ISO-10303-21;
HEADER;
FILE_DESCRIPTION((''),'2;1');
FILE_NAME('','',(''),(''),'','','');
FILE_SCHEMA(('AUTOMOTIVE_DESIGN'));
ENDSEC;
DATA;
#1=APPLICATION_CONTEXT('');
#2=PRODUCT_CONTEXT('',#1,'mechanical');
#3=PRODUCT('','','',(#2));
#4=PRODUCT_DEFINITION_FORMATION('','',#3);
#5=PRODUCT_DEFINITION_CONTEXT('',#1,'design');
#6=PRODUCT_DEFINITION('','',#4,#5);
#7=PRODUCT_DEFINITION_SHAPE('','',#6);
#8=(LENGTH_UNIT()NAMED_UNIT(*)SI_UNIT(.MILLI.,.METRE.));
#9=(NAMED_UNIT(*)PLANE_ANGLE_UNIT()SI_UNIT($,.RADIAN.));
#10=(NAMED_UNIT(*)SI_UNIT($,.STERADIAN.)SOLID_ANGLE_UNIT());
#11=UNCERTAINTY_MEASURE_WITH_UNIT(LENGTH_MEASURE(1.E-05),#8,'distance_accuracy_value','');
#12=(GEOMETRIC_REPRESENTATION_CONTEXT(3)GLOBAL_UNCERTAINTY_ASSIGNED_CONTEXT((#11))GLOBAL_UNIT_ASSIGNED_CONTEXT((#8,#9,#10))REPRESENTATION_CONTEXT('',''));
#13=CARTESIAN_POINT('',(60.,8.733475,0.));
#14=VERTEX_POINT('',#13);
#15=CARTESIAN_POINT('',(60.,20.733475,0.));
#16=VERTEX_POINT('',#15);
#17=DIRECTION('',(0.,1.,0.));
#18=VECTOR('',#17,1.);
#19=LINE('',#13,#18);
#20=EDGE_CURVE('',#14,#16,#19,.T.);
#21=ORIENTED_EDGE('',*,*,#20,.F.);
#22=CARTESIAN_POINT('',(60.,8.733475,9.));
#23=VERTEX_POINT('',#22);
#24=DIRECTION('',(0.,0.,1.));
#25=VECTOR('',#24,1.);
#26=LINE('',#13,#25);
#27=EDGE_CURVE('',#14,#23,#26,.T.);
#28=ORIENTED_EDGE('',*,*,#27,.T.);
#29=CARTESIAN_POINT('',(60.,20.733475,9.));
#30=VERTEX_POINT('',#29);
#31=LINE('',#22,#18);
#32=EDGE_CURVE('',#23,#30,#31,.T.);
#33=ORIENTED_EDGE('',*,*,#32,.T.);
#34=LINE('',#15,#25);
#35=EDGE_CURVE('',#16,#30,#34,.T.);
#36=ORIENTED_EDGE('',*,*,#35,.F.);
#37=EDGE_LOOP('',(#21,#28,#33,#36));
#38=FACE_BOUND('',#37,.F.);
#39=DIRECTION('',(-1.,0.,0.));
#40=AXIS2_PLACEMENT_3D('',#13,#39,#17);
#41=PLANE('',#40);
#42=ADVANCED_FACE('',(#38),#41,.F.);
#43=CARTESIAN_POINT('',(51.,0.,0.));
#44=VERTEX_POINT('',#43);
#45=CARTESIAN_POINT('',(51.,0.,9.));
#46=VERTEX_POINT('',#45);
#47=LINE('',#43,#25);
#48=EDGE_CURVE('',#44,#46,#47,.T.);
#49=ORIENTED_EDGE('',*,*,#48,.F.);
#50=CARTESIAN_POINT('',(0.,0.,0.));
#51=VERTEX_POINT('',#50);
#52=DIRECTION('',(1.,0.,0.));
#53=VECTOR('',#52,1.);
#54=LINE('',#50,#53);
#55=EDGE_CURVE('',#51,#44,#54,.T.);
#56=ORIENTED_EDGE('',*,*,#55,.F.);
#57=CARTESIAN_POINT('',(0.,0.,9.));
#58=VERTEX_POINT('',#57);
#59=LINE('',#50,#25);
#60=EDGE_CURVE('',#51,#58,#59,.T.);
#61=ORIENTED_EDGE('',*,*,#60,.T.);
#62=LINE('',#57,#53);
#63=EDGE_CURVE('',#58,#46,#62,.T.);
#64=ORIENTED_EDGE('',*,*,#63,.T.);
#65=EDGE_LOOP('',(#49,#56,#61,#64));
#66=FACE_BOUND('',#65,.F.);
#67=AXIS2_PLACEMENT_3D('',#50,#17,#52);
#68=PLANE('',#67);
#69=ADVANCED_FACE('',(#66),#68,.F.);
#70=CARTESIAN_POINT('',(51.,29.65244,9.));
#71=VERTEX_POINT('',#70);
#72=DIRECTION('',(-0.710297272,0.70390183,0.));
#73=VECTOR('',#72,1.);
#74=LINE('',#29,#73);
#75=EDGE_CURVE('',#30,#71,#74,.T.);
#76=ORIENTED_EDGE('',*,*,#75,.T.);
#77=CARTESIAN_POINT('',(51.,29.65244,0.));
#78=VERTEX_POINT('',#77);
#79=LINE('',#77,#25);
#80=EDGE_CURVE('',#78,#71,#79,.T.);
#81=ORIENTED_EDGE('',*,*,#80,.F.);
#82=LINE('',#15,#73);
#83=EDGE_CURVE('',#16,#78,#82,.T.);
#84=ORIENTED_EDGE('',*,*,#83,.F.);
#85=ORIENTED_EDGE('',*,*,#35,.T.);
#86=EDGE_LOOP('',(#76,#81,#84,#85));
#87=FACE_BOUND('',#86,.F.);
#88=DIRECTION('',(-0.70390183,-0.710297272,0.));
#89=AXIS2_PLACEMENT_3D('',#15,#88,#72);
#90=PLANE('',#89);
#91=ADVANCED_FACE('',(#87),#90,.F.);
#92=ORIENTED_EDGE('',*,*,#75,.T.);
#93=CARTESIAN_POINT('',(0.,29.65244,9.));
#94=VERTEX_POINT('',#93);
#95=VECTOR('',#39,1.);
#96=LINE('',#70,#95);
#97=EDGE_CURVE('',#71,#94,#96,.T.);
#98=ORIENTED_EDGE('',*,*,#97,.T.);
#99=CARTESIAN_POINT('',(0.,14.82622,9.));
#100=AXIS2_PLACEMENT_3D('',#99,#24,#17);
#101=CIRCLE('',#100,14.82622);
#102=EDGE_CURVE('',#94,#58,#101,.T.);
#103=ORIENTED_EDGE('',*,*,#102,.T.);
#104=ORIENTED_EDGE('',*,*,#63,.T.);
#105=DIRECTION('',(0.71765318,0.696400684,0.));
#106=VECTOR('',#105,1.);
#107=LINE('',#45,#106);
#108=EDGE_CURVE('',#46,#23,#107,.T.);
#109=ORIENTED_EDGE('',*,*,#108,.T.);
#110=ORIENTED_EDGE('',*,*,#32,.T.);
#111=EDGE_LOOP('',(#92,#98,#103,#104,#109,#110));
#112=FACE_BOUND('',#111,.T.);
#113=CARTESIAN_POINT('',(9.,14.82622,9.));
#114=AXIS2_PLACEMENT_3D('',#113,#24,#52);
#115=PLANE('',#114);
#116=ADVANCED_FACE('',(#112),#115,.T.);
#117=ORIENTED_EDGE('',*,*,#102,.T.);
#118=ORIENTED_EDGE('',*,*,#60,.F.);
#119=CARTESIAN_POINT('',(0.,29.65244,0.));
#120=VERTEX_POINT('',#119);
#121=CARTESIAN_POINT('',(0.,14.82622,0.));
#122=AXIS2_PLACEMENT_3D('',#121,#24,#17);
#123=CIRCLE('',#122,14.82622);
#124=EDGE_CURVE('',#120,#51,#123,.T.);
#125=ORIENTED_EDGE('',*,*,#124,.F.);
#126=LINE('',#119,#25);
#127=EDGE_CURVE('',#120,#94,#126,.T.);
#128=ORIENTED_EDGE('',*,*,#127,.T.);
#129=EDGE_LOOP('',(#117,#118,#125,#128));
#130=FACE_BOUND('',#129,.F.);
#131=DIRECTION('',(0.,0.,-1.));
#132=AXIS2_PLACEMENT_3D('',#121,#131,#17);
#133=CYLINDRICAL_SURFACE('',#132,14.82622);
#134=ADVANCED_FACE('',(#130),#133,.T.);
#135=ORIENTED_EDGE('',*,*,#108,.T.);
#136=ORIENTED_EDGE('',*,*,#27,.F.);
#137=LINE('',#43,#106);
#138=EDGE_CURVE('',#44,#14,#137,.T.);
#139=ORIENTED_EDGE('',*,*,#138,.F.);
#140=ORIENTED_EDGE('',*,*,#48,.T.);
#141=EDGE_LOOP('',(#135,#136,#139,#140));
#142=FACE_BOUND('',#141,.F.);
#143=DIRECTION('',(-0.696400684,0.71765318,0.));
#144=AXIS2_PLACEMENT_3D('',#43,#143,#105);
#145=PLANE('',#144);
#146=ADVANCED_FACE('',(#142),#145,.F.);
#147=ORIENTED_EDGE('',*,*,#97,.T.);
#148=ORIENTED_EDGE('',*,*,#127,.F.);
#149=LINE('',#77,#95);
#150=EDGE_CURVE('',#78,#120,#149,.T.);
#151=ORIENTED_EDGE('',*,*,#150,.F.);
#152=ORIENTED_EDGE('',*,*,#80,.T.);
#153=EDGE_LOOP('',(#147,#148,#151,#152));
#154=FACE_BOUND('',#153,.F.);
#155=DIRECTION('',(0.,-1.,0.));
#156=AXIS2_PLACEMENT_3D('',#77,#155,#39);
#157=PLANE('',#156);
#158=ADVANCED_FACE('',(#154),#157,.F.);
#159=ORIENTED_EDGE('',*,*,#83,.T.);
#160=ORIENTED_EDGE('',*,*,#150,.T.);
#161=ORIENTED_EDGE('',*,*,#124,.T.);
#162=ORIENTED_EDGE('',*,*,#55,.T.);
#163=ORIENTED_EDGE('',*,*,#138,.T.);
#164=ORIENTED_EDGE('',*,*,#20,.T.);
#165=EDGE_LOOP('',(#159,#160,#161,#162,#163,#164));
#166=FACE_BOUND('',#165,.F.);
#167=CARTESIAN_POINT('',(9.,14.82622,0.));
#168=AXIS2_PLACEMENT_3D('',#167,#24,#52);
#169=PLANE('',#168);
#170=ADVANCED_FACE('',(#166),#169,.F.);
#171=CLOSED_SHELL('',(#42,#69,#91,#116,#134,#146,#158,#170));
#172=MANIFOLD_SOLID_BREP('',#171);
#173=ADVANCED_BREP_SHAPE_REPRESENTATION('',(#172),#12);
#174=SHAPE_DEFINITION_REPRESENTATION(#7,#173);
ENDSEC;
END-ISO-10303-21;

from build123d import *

# Parameters (mm, degrees)
F0_W     = 18
F0_H     = 29.6524400212
F1_DEPTH = 9


# Not quite as in the source:
# - a feature names something its author has since deleted; it is built from what else it names


with BuildPart() as f1:
    # F0 (on Top) → F1 (new body)
    with BuildSketch(Plane.XY):
        with Locations((9, 14.8262200106)):
            Rectangle(F0_W, F0_H)
        with BuildLine():
            ThreePointArc((0, 29.6524400212), (-14.8262200106, 14.8262200106), (0, 0))
            Line((0, 0), (0, 29.6524400212))
        make_face()
        Polygon((18, 29.6524400212), (18, 0), (51, 0), (60, 8.7334750722), (60, 20.7334750722), (51, 29.6524400212), align=None)
    extrude(amount=F1_DEPTH)


solid = f1.part
